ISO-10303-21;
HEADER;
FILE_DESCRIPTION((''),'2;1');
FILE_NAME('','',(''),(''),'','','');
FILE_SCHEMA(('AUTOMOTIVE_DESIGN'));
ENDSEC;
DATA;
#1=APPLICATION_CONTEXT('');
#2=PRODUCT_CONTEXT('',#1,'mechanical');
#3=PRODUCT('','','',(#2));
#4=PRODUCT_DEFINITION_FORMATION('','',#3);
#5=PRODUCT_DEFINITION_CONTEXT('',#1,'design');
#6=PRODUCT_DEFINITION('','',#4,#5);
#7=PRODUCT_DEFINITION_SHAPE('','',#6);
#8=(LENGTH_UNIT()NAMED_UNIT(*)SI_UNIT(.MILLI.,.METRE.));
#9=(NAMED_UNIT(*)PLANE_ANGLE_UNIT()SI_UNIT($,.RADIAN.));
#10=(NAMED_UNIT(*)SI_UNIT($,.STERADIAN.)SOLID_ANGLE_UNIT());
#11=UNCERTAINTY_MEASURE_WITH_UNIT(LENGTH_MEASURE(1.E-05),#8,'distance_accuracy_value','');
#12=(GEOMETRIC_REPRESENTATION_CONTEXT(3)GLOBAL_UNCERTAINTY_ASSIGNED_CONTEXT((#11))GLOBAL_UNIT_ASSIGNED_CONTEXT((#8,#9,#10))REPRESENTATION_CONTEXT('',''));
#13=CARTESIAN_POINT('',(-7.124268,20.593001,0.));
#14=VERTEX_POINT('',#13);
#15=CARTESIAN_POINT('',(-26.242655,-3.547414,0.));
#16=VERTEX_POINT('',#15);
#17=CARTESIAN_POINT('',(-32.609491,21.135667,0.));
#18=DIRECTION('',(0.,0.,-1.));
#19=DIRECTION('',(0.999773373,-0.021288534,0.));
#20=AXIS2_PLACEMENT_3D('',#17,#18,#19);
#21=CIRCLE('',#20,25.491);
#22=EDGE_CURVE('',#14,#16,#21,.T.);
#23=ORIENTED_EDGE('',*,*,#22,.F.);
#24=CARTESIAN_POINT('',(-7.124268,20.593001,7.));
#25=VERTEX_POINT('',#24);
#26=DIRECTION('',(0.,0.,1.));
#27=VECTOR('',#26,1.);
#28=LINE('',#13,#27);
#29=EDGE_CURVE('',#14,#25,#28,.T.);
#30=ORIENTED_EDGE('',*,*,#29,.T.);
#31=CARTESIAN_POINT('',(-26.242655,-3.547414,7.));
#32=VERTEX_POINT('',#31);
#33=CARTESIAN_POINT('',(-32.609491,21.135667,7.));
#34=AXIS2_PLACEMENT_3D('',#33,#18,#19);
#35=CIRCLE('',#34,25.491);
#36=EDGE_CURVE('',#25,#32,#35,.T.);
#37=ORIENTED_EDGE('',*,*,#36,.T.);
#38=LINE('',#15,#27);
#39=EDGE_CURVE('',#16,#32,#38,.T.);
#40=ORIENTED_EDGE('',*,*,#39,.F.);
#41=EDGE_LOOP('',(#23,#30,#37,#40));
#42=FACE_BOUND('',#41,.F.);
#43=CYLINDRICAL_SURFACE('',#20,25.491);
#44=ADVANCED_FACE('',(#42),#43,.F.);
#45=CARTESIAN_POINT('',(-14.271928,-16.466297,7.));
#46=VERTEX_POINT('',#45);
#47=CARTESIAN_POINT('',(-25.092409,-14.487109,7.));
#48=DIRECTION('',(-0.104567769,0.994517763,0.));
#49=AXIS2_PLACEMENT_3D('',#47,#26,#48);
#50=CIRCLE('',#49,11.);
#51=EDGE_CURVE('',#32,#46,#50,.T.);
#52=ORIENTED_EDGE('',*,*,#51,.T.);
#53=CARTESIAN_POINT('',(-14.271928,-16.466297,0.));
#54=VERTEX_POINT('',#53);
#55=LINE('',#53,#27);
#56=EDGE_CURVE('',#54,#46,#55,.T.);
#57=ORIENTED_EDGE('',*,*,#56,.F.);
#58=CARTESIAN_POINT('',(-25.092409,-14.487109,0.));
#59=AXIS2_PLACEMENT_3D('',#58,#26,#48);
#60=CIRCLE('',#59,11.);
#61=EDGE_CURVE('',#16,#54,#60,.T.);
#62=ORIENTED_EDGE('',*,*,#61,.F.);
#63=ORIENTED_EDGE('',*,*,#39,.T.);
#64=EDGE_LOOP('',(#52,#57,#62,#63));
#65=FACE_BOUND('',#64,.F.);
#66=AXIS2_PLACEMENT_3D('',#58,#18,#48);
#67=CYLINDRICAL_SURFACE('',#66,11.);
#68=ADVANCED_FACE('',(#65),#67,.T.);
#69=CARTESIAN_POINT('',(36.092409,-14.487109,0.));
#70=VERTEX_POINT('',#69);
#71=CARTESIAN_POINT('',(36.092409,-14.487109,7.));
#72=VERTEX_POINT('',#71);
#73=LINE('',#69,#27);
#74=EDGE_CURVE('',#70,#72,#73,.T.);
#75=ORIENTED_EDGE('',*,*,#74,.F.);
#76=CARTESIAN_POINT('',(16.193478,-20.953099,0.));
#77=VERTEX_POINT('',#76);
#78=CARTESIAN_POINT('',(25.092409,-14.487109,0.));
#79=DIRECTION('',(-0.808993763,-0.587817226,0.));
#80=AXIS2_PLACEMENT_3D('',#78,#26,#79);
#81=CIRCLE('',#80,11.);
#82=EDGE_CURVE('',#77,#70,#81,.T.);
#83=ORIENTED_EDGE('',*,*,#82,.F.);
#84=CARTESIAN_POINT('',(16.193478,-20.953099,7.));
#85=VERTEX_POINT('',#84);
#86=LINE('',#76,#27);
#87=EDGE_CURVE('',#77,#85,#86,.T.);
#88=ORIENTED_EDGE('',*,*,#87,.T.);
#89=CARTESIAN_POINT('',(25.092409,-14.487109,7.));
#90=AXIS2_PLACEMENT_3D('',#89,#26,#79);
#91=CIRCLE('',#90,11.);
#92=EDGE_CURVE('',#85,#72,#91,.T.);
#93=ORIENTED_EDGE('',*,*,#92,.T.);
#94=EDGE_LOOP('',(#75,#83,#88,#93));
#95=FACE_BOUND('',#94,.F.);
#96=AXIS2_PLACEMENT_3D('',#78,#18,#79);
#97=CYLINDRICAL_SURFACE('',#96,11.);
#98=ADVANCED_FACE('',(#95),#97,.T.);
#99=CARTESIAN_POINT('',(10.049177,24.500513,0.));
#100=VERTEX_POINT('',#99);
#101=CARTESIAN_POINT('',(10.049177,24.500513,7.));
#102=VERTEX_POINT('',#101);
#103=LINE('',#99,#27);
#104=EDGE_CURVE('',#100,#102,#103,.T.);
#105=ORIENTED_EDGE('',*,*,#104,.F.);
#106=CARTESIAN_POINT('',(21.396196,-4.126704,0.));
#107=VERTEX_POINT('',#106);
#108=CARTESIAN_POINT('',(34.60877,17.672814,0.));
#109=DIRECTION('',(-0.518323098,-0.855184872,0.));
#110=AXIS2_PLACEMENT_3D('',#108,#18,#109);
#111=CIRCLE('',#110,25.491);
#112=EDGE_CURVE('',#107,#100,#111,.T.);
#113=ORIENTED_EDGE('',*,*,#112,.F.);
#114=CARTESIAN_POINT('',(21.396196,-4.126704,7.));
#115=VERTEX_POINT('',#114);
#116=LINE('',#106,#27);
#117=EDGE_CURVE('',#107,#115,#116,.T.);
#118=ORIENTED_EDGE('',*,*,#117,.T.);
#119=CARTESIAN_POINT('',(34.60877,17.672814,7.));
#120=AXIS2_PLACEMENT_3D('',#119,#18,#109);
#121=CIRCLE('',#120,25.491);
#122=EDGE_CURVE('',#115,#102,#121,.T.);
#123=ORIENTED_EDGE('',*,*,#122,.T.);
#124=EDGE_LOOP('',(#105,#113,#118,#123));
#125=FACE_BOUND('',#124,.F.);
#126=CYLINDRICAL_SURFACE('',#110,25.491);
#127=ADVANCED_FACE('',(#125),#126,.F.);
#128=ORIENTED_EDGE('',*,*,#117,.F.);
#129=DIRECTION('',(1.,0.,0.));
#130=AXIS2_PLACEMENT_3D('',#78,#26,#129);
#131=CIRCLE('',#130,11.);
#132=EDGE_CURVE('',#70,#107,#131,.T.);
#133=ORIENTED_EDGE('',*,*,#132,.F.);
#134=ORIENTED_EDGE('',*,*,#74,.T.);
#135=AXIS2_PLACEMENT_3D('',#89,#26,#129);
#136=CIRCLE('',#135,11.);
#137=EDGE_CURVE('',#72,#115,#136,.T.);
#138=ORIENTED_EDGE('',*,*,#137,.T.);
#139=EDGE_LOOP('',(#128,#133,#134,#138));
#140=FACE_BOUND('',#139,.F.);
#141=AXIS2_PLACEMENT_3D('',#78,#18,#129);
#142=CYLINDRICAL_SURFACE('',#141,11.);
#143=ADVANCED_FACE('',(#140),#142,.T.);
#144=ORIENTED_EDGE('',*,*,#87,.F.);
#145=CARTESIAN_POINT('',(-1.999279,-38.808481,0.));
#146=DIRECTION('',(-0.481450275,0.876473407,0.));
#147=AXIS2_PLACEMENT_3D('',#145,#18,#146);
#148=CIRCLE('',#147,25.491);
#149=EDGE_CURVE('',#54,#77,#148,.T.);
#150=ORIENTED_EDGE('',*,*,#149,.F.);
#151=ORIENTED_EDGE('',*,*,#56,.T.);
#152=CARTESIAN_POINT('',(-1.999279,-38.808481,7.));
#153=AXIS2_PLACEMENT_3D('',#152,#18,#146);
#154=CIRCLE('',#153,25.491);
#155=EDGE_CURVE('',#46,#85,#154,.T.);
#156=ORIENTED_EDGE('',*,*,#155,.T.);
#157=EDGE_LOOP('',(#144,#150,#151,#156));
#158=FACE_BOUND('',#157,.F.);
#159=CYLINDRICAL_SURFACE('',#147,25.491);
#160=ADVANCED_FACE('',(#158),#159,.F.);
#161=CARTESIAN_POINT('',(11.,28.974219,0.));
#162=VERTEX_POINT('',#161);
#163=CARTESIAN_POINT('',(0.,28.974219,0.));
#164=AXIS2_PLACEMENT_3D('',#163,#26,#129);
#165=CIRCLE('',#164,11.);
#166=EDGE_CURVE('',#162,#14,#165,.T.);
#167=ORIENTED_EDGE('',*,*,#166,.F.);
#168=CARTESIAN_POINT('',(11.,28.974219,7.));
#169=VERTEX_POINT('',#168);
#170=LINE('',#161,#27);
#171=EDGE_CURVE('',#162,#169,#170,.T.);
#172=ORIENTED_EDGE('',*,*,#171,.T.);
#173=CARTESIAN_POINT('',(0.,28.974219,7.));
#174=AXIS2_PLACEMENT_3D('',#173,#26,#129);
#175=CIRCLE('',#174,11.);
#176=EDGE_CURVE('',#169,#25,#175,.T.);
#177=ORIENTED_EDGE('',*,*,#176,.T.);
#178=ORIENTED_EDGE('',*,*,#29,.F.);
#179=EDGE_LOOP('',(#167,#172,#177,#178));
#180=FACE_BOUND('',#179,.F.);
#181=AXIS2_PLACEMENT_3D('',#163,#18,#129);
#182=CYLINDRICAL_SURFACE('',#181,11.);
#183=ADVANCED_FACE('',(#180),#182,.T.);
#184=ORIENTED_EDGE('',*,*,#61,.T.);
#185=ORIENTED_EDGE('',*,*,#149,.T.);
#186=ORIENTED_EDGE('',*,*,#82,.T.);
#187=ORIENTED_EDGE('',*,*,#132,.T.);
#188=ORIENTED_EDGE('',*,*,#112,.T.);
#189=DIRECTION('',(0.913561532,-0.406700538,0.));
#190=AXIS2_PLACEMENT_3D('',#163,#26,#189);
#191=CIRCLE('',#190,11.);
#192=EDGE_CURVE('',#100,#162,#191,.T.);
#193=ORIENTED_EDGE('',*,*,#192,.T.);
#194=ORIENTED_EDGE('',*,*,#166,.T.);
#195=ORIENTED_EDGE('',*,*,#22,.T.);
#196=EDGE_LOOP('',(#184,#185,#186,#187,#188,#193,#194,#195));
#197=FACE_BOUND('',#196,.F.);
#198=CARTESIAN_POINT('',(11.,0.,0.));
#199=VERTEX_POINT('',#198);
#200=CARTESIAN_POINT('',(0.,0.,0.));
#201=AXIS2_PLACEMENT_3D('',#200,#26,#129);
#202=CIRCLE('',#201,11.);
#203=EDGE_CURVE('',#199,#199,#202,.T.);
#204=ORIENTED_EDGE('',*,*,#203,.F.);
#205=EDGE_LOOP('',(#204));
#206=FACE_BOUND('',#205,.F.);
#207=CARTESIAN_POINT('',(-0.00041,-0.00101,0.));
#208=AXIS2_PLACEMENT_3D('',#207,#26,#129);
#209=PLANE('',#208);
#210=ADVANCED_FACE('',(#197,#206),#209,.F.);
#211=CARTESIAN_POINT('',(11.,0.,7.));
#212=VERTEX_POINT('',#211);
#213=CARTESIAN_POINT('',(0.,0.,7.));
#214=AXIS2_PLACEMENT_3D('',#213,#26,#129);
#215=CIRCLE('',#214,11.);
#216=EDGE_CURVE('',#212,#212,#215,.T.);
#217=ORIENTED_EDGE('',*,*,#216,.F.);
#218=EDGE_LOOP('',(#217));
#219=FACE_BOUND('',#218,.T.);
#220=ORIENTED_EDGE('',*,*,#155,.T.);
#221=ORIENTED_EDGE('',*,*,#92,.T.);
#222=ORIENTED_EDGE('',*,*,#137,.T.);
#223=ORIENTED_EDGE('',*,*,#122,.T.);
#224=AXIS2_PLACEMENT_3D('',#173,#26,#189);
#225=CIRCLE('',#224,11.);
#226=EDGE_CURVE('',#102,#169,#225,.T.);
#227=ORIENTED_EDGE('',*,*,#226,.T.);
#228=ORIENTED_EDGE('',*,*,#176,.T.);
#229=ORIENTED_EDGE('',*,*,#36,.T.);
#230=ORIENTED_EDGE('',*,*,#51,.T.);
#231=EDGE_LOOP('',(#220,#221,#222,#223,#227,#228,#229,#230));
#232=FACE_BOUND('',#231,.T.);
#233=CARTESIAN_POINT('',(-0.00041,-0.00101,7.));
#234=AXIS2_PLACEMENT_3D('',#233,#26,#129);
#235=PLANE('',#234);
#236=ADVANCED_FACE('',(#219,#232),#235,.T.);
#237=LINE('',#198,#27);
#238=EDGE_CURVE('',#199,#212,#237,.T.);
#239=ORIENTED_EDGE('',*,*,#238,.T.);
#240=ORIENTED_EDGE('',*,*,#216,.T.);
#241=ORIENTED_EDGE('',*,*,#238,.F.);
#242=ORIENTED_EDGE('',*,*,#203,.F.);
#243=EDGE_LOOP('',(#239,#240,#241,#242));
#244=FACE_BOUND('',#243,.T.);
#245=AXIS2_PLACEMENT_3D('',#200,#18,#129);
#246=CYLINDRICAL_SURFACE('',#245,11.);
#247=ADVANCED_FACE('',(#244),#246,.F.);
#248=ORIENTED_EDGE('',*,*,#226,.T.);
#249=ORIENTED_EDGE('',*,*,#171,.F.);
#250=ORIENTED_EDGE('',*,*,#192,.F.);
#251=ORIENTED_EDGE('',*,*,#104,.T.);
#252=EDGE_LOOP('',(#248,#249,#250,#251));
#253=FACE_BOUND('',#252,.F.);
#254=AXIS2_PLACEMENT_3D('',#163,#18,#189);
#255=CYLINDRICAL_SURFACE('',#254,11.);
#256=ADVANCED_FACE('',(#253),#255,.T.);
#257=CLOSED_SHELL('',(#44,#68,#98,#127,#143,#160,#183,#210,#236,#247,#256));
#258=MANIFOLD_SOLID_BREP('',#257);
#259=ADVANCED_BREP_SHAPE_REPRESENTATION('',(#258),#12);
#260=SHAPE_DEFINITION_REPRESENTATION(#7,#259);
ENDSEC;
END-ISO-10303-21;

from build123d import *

# Parameters (mm, degrees)
F0_R     = 11
F1_DEPTH = 7


# Not quite as in the source:
# - a feature of the source that left no trace in its solid (it failed there, or was rolled back) is left out


with BuildPart() as f1:
    # F0 (on Top) → F1 (new body)
    with BuildSketch(Plane.XY):
        with BuildLine():
            ThreePointArc((10.0491768514, 24.5005127008), (2.4404784534, 18.2483589799), (-7.1242678109, 20.5930010332))
            ThreePointArc((-7.1242678109, 20.5930010332), (-12.6262898219, 5.3096518199), (-26.2426548303, -3.54741391))
            ThreePointArc((-26.2426548303, -3.54741391), (-17.732134245, -6.3123707797), (-14.0924093757, -14.4871093077))
            ThreePointArc((-14.0924093757, -14.4871093077), (-14.1373809935, -15.4807657603), (-14.2719281295, -16.4662974242))
            ThreePointArc((-14.2719281295, -16.4662974242), (1.7148515496, -13.5895136513), (16.1934779789, -20.9530987908))
            ThreePointArc((16.1934779789, -20.9530987908), (14.5833032273, -11.237695828), (21.3961959404, -4.126703609))
            ThreePointArc((21.3961959404, -4.126703609), (10.9114382722, 8.2798618313), (10.0491768514, 24.5005127008))
        make_face()
        Circle(F0_R, mode=Mode.SUBTRACT)
        with BuildLine():
            ThreePointArc((10.0491768514, 24.5005127008), (10.7596687999, 26.6874026373), (11, 28.9742186153))
            ThreePointArc((11, 28.9742186153), (-4.6169824604, 38.9583797198), (-7.1242678109, 20.5930010332))
            ThreePointArc((-7.1242678109, 20.5930010332), (2.4404784534, 18.2483589799), (10.0491768514, 24.5005127008))
        make_face()
        with BuildLine():
            ThreePointArc((-14.0924093757, -14.4871093077), (-17.732134245, -6.3123707797), (-26.2426548303, -3.54741391))
            ThreePointArc((-26.2426548303, -3.54741391), (-33.1610370706, -21.9635554634), (-14.2719281295, -16.4662974242))
            ThreePointArc((-14.2719281295, -16.4662974242), (-14.1373809935, -15.4807657603), (-14.0924093757, -14.4871093077))
        make_face()
        with BuildLine():
            ThreePointArc((36.0924093757, -14.4871093077), (31.4304552974, -5.4966046559), (21.3961959404, -4.126703609))
            ThreePointArc((21.3961959404, -4.126703609), (14.5833032273, -11.237695828), (16.1934779789, -20.9530987908))
            ThreePointArc((16.1934779789, -20.9530987908), (28.4918030448, -24.9486638137), (36.0924093757, -14.4871093077))
        make_face()
    extrude(amount=F1_DEPTH)


solid = f1.part
